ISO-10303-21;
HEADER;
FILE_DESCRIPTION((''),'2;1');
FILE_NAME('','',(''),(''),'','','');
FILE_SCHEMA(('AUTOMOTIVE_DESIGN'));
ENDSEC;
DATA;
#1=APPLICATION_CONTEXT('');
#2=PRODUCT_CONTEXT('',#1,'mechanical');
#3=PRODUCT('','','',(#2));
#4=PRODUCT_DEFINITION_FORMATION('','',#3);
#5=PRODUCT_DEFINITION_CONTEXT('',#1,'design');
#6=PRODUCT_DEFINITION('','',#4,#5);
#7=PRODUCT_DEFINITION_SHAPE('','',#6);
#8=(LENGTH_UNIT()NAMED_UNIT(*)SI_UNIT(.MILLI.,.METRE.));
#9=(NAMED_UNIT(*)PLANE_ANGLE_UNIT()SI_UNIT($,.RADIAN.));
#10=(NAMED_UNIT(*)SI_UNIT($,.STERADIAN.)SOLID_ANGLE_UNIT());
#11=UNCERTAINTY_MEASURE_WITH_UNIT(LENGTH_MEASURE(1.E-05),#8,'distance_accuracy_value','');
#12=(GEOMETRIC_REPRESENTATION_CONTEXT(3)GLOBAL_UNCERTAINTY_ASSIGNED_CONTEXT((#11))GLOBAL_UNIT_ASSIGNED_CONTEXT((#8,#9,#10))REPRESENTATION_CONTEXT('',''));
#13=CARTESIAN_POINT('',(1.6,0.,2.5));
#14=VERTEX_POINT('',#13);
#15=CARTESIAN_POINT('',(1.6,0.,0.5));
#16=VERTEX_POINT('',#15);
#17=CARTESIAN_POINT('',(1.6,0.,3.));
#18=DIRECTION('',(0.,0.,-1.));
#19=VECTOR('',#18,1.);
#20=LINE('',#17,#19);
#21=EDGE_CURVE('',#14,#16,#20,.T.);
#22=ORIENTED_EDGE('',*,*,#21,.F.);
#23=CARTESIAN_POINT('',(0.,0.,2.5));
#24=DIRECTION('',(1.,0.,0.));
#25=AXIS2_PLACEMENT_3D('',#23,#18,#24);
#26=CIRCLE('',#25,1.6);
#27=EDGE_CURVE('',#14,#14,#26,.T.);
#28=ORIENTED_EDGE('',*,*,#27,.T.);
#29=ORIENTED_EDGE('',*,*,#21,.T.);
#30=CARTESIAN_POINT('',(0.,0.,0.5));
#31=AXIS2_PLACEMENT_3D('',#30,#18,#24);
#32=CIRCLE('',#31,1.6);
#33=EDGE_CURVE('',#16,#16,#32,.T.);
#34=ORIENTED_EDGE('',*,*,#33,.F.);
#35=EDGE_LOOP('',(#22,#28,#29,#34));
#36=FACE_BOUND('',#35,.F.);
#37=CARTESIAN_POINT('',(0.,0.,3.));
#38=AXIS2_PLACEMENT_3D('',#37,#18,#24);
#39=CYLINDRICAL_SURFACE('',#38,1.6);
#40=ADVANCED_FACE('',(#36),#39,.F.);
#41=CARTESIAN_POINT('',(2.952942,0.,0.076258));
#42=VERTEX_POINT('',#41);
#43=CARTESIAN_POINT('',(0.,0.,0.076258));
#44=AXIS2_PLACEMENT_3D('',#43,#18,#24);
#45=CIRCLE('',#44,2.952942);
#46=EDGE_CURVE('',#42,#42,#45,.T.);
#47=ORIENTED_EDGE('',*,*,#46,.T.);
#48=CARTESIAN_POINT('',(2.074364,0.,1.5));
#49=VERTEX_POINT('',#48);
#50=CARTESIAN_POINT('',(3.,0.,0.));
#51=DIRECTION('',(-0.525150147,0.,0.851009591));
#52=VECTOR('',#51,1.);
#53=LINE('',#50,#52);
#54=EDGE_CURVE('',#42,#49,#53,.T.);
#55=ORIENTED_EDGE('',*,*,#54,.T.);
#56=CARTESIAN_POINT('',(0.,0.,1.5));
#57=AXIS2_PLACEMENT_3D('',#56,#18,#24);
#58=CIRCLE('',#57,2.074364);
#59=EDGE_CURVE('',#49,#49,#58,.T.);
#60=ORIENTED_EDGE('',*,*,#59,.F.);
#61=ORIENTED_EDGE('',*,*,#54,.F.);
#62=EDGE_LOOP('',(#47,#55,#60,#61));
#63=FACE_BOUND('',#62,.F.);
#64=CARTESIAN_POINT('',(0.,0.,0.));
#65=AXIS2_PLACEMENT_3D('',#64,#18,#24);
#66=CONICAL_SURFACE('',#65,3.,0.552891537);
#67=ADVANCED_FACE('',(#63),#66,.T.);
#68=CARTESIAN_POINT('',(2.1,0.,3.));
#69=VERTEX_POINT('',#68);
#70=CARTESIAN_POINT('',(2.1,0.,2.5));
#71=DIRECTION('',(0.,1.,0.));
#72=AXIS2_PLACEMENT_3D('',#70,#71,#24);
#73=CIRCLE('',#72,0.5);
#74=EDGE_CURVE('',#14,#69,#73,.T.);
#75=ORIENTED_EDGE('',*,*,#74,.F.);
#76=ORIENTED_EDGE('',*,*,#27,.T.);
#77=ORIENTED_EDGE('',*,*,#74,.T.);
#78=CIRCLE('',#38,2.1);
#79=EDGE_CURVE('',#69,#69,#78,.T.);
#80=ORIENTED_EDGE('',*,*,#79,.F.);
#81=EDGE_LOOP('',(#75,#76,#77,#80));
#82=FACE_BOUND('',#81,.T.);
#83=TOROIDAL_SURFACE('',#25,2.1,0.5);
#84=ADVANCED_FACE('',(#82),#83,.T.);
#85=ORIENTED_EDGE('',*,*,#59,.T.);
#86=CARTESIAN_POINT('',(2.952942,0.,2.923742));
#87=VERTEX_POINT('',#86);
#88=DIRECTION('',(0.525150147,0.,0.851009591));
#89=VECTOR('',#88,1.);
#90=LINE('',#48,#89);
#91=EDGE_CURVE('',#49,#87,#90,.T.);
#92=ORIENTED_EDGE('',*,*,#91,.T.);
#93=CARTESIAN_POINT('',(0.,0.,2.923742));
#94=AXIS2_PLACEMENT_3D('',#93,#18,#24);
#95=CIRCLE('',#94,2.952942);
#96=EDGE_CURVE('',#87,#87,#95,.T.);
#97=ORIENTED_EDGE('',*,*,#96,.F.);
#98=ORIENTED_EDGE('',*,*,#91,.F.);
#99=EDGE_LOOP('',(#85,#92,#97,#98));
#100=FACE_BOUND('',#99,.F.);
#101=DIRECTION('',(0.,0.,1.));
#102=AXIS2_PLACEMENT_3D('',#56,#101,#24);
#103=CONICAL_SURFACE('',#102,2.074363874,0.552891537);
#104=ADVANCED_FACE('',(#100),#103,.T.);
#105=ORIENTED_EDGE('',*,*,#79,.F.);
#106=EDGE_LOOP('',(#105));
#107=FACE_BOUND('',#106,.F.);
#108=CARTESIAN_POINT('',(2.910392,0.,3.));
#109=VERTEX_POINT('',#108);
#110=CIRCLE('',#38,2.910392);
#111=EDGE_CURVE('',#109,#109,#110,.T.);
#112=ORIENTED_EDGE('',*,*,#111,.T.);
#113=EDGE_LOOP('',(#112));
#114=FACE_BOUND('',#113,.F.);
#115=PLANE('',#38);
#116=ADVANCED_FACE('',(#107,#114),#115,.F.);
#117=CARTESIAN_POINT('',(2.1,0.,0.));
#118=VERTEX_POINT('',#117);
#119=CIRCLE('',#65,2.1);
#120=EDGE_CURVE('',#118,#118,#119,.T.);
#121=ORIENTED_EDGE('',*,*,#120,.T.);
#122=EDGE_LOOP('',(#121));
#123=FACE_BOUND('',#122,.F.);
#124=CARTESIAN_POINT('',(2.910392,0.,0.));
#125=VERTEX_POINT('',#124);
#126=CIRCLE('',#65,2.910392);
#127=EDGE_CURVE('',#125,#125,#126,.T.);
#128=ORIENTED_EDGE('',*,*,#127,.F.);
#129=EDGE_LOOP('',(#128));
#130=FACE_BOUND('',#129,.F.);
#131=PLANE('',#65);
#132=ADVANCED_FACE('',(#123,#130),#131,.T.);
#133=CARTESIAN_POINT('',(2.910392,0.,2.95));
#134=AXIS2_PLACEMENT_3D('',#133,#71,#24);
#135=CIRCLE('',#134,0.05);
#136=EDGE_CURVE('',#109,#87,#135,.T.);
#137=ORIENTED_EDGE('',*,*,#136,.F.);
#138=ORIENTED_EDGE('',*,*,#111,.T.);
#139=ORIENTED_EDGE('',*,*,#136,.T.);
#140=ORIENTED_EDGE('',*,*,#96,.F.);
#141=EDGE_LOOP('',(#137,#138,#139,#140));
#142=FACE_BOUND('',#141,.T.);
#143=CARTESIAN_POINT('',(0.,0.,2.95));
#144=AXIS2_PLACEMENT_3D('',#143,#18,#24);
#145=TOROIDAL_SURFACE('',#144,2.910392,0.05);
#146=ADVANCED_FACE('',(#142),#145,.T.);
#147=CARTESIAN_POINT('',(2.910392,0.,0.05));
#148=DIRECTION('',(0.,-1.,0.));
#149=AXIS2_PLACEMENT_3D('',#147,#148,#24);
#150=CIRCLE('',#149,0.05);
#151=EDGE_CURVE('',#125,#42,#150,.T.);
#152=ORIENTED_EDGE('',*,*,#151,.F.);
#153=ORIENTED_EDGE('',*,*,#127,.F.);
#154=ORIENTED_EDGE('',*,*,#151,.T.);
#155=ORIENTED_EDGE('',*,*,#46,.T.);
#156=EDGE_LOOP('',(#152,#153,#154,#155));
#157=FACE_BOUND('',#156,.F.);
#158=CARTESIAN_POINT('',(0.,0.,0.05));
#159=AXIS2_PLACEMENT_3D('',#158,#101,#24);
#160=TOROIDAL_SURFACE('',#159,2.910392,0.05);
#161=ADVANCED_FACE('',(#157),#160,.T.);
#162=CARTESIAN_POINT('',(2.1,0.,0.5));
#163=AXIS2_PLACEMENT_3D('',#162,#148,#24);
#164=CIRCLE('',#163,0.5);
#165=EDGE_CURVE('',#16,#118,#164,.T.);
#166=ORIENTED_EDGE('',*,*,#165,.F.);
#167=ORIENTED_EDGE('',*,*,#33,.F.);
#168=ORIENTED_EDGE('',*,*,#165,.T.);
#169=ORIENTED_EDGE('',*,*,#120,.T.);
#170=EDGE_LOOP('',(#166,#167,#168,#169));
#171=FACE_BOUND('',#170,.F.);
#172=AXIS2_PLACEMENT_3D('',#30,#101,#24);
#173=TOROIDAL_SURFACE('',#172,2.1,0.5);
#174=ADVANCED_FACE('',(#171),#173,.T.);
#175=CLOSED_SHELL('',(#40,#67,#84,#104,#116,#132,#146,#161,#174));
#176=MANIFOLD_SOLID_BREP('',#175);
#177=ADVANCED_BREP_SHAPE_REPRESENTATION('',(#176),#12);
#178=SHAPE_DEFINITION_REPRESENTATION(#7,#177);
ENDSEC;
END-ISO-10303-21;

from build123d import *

# Parameters (mm, degrees)
F2_R = 0.5
F3_R = 0.05


with BuildPart() as f1:
    # F0 (on Front) → F1 (revolve)
    with BuildSketch(Plane.XZ):
        Polygon((1.6, 3), (1.6, 0), (3, 0), (2.0743638743, 1.5), (3, 3), align=None)
    revolve(axis=Axis((0, 0, 1.4736446901), (0, 0, -1)))

    # F2
    f2_edges = [f1.edges().sort_by_distance(p)[0] for p in [
        (-1.6, 0, 3),
        (-1.6, 0, 0),
    ]]
    fillet(f2_edges, radius=F2_R)

    # F3
    f3_edges = [f1.edges().sort_by_distance(p)[0] for p in [
        (-3, 0, 3),
        (-3, 0, 0),
    ]]
    fillet(f3_edges, radius=F3_R)


solid = f1.part
